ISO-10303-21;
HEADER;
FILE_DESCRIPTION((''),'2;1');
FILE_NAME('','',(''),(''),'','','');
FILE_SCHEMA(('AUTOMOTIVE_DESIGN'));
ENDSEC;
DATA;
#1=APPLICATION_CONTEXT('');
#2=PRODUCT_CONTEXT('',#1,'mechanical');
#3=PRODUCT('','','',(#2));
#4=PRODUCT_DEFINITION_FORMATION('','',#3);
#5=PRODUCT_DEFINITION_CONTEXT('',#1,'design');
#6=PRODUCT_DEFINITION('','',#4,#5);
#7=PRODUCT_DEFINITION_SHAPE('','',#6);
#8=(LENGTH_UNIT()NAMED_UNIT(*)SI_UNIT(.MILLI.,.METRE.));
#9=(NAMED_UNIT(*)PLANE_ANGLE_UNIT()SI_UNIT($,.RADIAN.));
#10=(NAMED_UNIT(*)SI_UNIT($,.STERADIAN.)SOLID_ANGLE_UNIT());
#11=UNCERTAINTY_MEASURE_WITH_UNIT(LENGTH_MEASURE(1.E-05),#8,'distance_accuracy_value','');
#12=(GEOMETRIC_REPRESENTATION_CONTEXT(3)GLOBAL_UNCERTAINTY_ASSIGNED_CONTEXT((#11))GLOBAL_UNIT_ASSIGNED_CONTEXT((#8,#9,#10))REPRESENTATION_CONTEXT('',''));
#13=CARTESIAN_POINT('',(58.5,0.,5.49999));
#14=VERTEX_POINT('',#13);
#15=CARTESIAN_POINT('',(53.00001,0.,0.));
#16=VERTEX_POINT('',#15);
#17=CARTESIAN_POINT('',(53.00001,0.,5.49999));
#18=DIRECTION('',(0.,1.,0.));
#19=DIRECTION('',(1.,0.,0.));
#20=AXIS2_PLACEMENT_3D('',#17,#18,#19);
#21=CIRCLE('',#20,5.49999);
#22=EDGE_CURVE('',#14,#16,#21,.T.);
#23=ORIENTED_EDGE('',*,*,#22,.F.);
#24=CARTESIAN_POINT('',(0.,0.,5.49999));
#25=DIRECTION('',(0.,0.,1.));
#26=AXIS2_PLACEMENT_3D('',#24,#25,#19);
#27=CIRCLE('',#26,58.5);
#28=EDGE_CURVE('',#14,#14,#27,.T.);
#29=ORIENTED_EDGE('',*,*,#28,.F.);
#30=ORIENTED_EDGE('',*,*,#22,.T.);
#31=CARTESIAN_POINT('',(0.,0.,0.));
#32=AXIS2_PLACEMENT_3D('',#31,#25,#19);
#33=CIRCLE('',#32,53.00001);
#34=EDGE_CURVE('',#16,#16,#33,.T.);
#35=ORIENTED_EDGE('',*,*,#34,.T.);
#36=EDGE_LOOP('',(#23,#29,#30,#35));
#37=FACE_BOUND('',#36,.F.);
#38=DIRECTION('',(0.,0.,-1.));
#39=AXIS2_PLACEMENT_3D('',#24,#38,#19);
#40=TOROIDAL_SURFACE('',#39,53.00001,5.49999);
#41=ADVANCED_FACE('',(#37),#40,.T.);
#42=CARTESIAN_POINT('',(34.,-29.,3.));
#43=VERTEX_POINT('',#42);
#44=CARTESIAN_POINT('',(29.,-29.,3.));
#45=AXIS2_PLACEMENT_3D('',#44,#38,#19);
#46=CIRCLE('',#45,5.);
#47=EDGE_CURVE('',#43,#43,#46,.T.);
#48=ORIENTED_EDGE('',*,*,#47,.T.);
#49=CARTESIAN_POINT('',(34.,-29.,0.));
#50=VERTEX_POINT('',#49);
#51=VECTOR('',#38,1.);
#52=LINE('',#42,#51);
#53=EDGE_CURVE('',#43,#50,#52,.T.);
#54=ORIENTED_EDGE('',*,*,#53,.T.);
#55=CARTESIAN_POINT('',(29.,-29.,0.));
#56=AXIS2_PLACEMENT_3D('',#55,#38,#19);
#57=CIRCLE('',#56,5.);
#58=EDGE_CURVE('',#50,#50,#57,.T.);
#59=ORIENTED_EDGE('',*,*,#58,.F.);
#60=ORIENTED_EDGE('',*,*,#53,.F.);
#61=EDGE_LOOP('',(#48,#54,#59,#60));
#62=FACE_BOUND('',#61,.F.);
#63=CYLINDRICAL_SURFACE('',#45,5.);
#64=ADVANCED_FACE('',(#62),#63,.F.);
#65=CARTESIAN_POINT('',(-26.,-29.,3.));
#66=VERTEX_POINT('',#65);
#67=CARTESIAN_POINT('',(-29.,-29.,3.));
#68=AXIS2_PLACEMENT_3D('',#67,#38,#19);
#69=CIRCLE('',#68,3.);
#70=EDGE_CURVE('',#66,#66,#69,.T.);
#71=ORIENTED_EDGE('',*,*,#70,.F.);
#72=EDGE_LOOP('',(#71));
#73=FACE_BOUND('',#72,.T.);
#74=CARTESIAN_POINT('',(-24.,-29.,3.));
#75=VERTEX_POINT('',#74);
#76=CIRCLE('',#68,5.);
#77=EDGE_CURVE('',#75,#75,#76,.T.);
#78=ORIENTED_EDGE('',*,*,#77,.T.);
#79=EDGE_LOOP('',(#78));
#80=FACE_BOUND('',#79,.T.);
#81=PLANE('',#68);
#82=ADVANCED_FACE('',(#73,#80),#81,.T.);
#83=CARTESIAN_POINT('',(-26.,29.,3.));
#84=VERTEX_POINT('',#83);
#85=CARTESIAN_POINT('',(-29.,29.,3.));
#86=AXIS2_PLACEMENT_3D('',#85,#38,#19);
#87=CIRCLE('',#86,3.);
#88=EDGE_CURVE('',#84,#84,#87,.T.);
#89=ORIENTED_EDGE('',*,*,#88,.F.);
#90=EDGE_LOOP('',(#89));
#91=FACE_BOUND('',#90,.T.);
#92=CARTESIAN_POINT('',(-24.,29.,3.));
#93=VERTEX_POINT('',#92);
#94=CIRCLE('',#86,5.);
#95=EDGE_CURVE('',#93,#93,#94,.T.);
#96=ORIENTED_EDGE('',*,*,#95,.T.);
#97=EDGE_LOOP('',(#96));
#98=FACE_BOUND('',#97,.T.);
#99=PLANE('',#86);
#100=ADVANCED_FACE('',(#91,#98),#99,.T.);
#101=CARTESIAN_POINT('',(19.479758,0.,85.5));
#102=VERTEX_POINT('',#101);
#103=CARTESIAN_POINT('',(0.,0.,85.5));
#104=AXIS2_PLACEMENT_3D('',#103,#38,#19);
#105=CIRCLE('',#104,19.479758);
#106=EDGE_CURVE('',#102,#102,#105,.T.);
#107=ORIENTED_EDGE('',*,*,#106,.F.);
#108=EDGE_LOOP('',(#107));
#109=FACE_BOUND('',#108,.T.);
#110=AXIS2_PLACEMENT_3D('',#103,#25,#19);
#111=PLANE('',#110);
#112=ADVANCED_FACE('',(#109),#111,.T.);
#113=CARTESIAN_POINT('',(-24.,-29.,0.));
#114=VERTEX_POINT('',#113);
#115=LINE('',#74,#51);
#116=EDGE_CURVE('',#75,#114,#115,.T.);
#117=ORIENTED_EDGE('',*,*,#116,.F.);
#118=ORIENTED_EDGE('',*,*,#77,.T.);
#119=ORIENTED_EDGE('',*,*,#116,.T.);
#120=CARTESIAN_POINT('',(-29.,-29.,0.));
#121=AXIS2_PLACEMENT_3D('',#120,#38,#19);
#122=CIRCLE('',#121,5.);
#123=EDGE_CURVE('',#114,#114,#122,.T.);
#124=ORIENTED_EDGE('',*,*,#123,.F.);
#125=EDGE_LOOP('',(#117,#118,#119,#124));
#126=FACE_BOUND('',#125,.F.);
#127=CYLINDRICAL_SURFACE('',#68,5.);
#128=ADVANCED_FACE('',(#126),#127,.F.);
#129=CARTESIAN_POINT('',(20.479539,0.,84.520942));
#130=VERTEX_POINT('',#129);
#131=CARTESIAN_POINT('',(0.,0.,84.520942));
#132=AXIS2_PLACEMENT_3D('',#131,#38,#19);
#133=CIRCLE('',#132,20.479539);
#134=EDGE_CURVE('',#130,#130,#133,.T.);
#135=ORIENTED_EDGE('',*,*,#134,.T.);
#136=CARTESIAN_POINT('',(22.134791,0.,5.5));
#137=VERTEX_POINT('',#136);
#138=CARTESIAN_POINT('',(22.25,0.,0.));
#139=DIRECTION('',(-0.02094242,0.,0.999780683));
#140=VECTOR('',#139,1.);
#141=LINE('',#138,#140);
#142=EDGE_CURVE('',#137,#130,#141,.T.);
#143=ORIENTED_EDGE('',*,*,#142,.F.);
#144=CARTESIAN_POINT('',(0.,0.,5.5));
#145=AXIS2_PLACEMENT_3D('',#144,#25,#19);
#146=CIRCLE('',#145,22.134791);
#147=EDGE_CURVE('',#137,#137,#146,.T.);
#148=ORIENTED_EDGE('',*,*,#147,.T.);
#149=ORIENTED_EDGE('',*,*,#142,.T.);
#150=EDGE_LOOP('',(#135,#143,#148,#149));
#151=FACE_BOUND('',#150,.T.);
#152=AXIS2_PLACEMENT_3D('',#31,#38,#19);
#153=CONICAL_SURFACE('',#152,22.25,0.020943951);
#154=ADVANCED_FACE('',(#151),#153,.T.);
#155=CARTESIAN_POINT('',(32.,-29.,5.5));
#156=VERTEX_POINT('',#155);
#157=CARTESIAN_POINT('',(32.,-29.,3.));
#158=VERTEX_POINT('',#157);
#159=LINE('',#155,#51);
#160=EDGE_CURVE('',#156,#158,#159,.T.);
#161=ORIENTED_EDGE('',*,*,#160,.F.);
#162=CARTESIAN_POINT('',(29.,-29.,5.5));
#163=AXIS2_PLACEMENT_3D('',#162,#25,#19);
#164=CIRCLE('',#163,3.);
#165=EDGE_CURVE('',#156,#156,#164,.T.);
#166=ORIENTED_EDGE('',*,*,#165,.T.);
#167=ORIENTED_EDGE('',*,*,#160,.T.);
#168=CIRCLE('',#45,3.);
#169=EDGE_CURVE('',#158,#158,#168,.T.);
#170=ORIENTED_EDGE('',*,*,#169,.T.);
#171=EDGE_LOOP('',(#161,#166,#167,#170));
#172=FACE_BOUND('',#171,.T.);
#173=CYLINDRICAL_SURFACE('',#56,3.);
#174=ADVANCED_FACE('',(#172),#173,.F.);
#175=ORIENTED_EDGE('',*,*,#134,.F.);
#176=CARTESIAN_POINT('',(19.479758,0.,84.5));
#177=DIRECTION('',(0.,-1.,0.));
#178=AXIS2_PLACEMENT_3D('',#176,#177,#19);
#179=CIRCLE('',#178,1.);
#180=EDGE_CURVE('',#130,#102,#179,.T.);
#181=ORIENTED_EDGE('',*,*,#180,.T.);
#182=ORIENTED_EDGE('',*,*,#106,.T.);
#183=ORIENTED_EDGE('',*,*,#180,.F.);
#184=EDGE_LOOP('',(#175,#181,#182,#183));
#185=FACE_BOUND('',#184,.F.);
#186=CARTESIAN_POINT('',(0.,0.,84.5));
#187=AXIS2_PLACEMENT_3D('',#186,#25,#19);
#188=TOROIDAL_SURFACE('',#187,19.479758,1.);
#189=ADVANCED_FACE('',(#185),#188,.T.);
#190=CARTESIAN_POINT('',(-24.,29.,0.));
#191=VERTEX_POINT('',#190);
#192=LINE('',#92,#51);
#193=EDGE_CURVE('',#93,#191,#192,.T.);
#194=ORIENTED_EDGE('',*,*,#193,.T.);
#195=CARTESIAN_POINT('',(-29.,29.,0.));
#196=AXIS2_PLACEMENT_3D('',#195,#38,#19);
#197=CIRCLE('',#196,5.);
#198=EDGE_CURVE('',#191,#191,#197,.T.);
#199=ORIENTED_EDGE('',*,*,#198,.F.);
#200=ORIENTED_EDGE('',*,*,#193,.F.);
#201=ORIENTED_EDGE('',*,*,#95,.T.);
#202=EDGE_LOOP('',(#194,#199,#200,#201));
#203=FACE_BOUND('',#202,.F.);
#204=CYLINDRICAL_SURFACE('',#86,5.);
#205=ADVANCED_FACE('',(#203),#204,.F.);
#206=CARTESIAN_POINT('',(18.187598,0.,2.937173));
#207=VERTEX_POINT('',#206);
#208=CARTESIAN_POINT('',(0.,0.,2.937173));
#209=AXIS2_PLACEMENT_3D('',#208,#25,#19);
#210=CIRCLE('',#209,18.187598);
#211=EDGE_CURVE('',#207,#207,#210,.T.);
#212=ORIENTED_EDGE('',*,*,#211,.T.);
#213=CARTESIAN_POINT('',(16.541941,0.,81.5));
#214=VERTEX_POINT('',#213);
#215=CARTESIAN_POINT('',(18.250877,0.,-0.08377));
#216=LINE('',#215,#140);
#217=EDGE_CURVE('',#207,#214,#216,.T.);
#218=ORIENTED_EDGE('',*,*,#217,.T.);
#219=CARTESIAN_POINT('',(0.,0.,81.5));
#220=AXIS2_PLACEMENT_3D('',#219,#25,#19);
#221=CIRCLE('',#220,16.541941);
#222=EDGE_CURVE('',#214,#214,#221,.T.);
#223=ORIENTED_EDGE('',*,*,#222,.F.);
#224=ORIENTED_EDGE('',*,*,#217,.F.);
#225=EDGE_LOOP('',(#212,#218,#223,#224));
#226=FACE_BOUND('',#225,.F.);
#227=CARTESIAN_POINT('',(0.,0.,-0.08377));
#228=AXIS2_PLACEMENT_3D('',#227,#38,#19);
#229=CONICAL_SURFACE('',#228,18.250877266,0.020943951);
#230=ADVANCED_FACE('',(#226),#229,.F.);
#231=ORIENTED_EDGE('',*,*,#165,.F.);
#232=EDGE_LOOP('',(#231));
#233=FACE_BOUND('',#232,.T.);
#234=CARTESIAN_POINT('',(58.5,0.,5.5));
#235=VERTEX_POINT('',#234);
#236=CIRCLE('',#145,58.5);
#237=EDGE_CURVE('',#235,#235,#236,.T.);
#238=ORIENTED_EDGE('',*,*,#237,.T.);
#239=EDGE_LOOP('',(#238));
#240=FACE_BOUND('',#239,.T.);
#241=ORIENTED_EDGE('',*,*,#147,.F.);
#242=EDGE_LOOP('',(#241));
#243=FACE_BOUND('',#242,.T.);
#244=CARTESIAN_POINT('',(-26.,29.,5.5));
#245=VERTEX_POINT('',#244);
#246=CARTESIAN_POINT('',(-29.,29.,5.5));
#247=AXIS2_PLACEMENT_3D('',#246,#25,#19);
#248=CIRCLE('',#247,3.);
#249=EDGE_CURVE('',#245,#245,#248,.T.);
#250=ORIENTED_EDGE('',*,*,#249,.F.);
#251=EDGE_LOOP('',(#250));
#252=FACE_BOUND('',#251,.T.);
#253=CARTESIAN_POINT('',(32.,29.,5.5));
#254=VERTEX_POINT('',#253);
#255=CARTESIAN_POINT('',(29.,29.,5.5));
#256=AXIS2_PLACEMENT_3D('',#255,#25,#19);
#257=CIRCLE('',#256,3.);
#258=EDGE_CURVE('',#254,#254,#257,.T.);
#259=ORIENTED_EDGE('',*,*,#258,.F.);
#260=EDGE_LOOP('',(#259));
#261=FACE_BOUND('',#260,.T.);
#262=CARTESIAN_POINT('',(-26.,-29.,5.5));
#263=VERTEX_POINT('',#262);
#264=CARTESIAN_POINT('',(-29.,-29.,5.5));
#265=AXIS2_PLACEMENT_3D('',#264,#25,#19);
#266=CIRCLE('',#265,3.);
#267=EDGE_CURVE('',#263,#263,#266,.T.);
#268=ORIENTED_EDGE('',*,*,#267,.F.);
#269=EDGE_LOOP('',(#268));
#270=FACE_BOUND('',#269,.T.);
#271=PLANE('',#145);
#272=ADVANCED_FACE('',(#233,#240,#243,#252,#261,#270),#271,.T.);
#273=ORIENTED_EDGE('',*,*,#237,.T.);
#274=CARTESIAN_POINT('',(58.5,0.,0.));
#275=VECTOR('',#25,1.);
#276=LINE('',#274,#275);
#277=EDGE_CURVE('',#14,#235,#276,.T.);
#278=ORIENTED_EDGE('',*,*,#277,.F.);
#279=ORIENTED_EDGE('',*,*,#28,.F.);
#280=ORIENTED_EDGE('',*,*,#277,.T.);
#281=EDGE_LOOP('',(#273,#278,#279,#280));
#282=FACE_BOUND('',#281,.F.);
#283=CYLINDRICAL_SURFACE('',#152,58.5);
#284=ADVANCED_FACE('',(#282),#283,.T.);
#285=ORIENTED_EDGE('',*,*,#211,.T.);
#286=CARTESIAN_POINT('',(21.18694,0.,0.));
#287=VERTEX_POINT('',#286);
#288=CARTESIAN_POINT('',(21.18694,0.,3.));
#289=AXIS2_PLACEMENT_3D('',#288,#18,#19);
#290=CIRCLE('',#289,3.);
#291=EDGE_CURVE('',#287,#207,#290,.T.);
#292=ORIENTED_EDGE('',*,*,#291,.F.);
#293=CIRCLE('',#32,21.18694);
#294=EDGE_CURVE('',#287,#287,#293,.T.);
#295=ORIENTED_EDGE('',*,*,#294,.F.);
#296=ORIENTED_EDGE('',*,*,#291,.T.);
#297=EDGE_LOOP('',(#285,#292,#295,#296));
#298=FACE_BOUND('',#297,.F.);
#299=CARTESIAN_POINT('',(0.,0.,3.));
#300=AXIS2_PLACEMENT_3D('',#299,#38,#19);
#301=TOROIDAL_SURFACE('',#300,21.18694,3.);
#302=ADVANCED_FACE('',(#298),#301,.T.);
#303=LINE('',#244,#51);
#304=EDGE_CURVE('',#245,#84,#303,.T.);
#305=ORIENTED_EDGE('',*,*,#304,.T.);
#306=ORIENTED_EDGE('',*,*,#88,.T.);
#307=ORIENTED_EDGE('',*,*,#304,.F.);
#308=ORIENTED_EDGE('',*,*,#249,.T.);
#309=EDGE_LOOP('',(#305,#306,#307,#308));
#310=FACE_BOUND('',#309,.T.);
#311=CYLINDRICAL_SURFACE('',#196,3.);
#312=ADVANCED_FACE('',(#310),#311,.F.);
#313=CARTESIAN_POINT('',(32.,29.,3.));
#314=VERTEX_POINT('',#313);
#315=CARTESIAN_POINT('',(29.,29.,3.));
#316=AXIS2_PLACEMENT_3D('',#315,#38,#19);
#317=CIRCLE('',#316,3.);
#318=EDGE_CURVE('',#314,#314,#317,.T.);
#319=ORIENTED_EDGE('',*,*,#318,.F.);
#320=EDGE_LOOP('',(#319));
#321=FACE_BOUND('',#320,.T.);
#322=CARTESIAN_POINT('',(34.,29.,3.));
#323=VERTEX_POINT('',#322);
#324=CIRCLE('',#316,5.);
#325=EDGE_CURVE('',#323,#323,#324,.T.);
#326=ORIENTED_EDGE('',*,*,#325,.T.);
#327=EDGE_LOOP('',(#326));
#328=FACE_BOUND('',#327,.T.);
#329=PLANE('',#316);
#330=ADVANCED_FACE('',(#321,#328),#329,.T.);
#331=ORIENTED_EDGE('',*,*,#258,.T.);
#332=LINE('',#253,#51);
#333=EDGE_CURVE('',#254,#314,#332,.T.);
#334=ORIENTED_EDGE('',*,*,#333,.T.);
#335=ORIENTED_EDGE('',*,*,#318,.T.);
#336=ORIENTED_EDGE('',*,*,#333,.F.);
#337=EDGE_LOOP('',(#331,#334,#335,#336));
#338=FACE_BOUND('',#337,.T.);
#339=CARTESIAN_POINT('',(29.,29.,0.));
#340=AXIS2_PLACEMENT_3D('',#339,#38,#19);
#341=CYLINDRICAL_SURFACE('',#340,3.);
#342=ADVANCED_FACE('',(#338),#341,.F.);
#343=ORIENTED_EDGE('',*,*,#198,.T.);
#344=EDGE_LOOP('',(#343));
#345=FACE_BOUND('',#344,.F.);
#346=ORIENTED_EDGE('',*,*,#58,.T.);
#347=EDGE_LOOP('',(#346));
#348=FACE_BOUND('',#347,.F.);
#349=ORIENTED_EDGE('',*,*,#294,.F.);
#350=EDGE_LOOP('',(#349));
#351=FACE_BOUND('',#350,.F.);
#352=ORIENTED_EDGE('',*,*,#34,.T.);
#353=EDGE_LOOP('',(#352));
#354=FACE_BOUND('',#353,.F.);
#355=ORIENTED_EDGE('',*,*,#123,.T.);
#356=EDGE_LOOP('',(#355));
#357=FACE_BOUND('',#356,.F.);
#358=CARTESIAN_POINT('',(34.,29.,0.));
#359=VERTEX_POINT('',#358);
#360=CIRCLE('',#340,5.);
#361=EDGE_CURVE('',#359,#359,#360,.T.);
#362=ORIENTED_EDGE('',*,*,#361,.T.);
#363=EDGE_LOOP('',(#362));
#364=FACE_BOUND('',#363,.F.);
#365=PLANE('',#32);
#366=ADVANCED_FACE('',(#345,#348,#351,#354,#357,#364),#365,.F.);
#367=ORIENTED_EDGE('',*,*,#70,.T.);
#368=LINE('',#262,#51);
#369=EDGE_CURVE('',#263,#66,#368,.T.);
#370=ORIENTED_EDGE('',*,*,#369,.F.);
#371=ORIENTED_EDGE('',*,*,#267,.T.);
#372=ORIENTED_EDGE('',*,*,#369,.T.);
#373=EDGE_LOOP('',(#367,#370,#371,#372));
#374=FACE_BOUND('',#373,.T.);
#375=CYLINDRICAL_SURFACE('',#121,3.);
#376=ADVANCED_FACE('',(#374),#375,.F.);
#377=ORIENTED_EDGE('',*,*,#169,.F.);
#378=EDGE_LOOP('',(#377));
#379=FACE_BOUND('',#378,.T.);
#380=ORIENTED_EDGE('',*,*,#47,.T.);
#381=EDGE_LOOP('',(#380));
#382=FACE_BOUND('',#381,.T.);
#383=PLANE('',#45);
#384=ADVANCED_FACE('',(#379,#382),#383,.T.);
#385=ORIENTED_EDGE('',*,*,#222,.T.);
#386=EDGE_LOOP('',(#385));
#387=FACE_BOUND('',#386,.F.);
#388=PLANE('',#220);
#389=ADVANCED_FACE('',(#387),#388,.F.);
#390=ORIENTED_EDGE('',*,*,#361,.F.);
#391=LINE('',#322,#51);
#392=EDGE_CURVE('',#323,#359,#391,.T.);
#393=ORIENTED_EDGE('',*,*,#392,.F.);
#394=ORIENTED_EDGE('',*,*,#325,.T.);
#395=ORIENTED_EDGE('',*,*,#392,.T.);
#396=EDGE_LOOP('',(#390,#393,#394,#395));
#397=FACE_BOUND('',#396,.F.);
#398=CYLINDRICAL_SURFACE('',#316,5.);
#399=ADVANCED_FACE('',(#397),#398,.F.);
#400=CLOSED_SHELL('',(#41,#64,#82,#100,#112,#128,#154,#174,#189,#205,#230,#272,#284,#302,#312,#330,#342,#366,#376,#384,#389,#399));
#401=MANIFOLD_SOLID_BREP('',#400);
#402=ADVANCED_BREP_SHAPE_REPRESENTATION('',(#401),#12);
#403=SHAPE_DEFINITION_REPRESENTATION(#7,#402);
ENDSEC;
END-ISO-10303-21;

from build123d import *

# Parameters (mm, degrees)
F0_R           = 22.25
F0_R_2         = 21.25
F1_DEPTH       = 85.5
F1_TAPER       = 1.2
F2_T           = -4
F0_R_3         = 58.5
F0_R_4         = 3
F3_DEPTH       = 5.5
F4_R           = 5.49999
F5_D           = 6
F5_DEPTH       = 5
F5_CBORE_D     = 10
F5_CBORE_DEPTH = 3
F5_TIP         = 1.8025818571
F6_R           = 1
F7_R           = 3


# Not quite as in the source:
# - a fillet or chamfer is up to 0.001 mm smaller than in the source, because OpenCascade refuses the exact size


with BuildPart() as f1:
    # F0 (on Top) → F1 (new body)
    with BuildSketch(Plane.XY):
        Circle(F0_R)
        Circle(F0_R_2, mode=Mode.SUBTRACT)
        Circle(F0_R_2)
    extrude(amount=F1_DEPTH, taper=F1_TAPER)

    # F2
    f2_openings = [f1.faces().sort_by_distance(p)[0] for p in [
        (0, 0, 0),
    ]]
    offset(amount=F2_T, openings=f2_openings)

    # F0 (on Top) → F3 (join)
    with BuildSketch(Plane.XY):
        Circle(F0_R_3)
        with Locations((-29, -29)):
            Circle(F0_R_4, mode=Mode.SUBTRACT)
        with Locations((29, -29)):
            Circle(F0_R_4, mode=Mode.SUBTRACT)
        with Locations((-29, 29)):
            Circle(F0_R_4, mode=Mode.SUBTRACT)
        Circle(F0_R, mode=Mode.SUBTRACT)
        with Locations((29, 29)):
            Circle(F0_R_4, mode=Mode.SUBTRACT)
        Circle(F0_R)
        Circle(F0_R_2, mode=Mode.SUBTRACT)
    extrude(amount=F3_DEPTH)

    # F4 (radius 5.5 in the source; OpenCascade refuses exactly that, so slightly less here)
    f4_edges = [f1.edges().sort_by_distance(p)[0] for p in [
        (-58.5, 0, 0),
    ]]
    fillet(f4_edges, radius=F4_R)

    # F5
    with Locations(Plane(origin=(0, 0, 0), x_dir=(1, 0, 0), z_dir=(0, 0, -1))):
        with Locations((29, -29), (-29, -29), (-29, 29), (29, 29)):
            CounterBoreHole(F5_D / 2, F5_CBORE_D / 2, F5_CBORE_DEPTH, depth=F5_DEPTH)
            with Locations((0, 0, -(F5_DEPTH + F5_TIP / 2))):  # 118° drill point
                Cone(0, F5_D / 2, F5_TIP, mode=Mode.SUBTRACT)

    # F6
    f6_edges = [f1.edges().sort_by_distance(p)[0] for p in [
        (-20.45903, 0, 85.5),
    ]]
    fillet(f6_edges, radius=F6_R)

    # F7
    f7_edges = [f1.edges().sort_by_distance(p)[0] for p in [
        (-18.249123, 0, 0),
    ]]
    fillet(f7_edges, radius=F7_R)


solid = f1.part
